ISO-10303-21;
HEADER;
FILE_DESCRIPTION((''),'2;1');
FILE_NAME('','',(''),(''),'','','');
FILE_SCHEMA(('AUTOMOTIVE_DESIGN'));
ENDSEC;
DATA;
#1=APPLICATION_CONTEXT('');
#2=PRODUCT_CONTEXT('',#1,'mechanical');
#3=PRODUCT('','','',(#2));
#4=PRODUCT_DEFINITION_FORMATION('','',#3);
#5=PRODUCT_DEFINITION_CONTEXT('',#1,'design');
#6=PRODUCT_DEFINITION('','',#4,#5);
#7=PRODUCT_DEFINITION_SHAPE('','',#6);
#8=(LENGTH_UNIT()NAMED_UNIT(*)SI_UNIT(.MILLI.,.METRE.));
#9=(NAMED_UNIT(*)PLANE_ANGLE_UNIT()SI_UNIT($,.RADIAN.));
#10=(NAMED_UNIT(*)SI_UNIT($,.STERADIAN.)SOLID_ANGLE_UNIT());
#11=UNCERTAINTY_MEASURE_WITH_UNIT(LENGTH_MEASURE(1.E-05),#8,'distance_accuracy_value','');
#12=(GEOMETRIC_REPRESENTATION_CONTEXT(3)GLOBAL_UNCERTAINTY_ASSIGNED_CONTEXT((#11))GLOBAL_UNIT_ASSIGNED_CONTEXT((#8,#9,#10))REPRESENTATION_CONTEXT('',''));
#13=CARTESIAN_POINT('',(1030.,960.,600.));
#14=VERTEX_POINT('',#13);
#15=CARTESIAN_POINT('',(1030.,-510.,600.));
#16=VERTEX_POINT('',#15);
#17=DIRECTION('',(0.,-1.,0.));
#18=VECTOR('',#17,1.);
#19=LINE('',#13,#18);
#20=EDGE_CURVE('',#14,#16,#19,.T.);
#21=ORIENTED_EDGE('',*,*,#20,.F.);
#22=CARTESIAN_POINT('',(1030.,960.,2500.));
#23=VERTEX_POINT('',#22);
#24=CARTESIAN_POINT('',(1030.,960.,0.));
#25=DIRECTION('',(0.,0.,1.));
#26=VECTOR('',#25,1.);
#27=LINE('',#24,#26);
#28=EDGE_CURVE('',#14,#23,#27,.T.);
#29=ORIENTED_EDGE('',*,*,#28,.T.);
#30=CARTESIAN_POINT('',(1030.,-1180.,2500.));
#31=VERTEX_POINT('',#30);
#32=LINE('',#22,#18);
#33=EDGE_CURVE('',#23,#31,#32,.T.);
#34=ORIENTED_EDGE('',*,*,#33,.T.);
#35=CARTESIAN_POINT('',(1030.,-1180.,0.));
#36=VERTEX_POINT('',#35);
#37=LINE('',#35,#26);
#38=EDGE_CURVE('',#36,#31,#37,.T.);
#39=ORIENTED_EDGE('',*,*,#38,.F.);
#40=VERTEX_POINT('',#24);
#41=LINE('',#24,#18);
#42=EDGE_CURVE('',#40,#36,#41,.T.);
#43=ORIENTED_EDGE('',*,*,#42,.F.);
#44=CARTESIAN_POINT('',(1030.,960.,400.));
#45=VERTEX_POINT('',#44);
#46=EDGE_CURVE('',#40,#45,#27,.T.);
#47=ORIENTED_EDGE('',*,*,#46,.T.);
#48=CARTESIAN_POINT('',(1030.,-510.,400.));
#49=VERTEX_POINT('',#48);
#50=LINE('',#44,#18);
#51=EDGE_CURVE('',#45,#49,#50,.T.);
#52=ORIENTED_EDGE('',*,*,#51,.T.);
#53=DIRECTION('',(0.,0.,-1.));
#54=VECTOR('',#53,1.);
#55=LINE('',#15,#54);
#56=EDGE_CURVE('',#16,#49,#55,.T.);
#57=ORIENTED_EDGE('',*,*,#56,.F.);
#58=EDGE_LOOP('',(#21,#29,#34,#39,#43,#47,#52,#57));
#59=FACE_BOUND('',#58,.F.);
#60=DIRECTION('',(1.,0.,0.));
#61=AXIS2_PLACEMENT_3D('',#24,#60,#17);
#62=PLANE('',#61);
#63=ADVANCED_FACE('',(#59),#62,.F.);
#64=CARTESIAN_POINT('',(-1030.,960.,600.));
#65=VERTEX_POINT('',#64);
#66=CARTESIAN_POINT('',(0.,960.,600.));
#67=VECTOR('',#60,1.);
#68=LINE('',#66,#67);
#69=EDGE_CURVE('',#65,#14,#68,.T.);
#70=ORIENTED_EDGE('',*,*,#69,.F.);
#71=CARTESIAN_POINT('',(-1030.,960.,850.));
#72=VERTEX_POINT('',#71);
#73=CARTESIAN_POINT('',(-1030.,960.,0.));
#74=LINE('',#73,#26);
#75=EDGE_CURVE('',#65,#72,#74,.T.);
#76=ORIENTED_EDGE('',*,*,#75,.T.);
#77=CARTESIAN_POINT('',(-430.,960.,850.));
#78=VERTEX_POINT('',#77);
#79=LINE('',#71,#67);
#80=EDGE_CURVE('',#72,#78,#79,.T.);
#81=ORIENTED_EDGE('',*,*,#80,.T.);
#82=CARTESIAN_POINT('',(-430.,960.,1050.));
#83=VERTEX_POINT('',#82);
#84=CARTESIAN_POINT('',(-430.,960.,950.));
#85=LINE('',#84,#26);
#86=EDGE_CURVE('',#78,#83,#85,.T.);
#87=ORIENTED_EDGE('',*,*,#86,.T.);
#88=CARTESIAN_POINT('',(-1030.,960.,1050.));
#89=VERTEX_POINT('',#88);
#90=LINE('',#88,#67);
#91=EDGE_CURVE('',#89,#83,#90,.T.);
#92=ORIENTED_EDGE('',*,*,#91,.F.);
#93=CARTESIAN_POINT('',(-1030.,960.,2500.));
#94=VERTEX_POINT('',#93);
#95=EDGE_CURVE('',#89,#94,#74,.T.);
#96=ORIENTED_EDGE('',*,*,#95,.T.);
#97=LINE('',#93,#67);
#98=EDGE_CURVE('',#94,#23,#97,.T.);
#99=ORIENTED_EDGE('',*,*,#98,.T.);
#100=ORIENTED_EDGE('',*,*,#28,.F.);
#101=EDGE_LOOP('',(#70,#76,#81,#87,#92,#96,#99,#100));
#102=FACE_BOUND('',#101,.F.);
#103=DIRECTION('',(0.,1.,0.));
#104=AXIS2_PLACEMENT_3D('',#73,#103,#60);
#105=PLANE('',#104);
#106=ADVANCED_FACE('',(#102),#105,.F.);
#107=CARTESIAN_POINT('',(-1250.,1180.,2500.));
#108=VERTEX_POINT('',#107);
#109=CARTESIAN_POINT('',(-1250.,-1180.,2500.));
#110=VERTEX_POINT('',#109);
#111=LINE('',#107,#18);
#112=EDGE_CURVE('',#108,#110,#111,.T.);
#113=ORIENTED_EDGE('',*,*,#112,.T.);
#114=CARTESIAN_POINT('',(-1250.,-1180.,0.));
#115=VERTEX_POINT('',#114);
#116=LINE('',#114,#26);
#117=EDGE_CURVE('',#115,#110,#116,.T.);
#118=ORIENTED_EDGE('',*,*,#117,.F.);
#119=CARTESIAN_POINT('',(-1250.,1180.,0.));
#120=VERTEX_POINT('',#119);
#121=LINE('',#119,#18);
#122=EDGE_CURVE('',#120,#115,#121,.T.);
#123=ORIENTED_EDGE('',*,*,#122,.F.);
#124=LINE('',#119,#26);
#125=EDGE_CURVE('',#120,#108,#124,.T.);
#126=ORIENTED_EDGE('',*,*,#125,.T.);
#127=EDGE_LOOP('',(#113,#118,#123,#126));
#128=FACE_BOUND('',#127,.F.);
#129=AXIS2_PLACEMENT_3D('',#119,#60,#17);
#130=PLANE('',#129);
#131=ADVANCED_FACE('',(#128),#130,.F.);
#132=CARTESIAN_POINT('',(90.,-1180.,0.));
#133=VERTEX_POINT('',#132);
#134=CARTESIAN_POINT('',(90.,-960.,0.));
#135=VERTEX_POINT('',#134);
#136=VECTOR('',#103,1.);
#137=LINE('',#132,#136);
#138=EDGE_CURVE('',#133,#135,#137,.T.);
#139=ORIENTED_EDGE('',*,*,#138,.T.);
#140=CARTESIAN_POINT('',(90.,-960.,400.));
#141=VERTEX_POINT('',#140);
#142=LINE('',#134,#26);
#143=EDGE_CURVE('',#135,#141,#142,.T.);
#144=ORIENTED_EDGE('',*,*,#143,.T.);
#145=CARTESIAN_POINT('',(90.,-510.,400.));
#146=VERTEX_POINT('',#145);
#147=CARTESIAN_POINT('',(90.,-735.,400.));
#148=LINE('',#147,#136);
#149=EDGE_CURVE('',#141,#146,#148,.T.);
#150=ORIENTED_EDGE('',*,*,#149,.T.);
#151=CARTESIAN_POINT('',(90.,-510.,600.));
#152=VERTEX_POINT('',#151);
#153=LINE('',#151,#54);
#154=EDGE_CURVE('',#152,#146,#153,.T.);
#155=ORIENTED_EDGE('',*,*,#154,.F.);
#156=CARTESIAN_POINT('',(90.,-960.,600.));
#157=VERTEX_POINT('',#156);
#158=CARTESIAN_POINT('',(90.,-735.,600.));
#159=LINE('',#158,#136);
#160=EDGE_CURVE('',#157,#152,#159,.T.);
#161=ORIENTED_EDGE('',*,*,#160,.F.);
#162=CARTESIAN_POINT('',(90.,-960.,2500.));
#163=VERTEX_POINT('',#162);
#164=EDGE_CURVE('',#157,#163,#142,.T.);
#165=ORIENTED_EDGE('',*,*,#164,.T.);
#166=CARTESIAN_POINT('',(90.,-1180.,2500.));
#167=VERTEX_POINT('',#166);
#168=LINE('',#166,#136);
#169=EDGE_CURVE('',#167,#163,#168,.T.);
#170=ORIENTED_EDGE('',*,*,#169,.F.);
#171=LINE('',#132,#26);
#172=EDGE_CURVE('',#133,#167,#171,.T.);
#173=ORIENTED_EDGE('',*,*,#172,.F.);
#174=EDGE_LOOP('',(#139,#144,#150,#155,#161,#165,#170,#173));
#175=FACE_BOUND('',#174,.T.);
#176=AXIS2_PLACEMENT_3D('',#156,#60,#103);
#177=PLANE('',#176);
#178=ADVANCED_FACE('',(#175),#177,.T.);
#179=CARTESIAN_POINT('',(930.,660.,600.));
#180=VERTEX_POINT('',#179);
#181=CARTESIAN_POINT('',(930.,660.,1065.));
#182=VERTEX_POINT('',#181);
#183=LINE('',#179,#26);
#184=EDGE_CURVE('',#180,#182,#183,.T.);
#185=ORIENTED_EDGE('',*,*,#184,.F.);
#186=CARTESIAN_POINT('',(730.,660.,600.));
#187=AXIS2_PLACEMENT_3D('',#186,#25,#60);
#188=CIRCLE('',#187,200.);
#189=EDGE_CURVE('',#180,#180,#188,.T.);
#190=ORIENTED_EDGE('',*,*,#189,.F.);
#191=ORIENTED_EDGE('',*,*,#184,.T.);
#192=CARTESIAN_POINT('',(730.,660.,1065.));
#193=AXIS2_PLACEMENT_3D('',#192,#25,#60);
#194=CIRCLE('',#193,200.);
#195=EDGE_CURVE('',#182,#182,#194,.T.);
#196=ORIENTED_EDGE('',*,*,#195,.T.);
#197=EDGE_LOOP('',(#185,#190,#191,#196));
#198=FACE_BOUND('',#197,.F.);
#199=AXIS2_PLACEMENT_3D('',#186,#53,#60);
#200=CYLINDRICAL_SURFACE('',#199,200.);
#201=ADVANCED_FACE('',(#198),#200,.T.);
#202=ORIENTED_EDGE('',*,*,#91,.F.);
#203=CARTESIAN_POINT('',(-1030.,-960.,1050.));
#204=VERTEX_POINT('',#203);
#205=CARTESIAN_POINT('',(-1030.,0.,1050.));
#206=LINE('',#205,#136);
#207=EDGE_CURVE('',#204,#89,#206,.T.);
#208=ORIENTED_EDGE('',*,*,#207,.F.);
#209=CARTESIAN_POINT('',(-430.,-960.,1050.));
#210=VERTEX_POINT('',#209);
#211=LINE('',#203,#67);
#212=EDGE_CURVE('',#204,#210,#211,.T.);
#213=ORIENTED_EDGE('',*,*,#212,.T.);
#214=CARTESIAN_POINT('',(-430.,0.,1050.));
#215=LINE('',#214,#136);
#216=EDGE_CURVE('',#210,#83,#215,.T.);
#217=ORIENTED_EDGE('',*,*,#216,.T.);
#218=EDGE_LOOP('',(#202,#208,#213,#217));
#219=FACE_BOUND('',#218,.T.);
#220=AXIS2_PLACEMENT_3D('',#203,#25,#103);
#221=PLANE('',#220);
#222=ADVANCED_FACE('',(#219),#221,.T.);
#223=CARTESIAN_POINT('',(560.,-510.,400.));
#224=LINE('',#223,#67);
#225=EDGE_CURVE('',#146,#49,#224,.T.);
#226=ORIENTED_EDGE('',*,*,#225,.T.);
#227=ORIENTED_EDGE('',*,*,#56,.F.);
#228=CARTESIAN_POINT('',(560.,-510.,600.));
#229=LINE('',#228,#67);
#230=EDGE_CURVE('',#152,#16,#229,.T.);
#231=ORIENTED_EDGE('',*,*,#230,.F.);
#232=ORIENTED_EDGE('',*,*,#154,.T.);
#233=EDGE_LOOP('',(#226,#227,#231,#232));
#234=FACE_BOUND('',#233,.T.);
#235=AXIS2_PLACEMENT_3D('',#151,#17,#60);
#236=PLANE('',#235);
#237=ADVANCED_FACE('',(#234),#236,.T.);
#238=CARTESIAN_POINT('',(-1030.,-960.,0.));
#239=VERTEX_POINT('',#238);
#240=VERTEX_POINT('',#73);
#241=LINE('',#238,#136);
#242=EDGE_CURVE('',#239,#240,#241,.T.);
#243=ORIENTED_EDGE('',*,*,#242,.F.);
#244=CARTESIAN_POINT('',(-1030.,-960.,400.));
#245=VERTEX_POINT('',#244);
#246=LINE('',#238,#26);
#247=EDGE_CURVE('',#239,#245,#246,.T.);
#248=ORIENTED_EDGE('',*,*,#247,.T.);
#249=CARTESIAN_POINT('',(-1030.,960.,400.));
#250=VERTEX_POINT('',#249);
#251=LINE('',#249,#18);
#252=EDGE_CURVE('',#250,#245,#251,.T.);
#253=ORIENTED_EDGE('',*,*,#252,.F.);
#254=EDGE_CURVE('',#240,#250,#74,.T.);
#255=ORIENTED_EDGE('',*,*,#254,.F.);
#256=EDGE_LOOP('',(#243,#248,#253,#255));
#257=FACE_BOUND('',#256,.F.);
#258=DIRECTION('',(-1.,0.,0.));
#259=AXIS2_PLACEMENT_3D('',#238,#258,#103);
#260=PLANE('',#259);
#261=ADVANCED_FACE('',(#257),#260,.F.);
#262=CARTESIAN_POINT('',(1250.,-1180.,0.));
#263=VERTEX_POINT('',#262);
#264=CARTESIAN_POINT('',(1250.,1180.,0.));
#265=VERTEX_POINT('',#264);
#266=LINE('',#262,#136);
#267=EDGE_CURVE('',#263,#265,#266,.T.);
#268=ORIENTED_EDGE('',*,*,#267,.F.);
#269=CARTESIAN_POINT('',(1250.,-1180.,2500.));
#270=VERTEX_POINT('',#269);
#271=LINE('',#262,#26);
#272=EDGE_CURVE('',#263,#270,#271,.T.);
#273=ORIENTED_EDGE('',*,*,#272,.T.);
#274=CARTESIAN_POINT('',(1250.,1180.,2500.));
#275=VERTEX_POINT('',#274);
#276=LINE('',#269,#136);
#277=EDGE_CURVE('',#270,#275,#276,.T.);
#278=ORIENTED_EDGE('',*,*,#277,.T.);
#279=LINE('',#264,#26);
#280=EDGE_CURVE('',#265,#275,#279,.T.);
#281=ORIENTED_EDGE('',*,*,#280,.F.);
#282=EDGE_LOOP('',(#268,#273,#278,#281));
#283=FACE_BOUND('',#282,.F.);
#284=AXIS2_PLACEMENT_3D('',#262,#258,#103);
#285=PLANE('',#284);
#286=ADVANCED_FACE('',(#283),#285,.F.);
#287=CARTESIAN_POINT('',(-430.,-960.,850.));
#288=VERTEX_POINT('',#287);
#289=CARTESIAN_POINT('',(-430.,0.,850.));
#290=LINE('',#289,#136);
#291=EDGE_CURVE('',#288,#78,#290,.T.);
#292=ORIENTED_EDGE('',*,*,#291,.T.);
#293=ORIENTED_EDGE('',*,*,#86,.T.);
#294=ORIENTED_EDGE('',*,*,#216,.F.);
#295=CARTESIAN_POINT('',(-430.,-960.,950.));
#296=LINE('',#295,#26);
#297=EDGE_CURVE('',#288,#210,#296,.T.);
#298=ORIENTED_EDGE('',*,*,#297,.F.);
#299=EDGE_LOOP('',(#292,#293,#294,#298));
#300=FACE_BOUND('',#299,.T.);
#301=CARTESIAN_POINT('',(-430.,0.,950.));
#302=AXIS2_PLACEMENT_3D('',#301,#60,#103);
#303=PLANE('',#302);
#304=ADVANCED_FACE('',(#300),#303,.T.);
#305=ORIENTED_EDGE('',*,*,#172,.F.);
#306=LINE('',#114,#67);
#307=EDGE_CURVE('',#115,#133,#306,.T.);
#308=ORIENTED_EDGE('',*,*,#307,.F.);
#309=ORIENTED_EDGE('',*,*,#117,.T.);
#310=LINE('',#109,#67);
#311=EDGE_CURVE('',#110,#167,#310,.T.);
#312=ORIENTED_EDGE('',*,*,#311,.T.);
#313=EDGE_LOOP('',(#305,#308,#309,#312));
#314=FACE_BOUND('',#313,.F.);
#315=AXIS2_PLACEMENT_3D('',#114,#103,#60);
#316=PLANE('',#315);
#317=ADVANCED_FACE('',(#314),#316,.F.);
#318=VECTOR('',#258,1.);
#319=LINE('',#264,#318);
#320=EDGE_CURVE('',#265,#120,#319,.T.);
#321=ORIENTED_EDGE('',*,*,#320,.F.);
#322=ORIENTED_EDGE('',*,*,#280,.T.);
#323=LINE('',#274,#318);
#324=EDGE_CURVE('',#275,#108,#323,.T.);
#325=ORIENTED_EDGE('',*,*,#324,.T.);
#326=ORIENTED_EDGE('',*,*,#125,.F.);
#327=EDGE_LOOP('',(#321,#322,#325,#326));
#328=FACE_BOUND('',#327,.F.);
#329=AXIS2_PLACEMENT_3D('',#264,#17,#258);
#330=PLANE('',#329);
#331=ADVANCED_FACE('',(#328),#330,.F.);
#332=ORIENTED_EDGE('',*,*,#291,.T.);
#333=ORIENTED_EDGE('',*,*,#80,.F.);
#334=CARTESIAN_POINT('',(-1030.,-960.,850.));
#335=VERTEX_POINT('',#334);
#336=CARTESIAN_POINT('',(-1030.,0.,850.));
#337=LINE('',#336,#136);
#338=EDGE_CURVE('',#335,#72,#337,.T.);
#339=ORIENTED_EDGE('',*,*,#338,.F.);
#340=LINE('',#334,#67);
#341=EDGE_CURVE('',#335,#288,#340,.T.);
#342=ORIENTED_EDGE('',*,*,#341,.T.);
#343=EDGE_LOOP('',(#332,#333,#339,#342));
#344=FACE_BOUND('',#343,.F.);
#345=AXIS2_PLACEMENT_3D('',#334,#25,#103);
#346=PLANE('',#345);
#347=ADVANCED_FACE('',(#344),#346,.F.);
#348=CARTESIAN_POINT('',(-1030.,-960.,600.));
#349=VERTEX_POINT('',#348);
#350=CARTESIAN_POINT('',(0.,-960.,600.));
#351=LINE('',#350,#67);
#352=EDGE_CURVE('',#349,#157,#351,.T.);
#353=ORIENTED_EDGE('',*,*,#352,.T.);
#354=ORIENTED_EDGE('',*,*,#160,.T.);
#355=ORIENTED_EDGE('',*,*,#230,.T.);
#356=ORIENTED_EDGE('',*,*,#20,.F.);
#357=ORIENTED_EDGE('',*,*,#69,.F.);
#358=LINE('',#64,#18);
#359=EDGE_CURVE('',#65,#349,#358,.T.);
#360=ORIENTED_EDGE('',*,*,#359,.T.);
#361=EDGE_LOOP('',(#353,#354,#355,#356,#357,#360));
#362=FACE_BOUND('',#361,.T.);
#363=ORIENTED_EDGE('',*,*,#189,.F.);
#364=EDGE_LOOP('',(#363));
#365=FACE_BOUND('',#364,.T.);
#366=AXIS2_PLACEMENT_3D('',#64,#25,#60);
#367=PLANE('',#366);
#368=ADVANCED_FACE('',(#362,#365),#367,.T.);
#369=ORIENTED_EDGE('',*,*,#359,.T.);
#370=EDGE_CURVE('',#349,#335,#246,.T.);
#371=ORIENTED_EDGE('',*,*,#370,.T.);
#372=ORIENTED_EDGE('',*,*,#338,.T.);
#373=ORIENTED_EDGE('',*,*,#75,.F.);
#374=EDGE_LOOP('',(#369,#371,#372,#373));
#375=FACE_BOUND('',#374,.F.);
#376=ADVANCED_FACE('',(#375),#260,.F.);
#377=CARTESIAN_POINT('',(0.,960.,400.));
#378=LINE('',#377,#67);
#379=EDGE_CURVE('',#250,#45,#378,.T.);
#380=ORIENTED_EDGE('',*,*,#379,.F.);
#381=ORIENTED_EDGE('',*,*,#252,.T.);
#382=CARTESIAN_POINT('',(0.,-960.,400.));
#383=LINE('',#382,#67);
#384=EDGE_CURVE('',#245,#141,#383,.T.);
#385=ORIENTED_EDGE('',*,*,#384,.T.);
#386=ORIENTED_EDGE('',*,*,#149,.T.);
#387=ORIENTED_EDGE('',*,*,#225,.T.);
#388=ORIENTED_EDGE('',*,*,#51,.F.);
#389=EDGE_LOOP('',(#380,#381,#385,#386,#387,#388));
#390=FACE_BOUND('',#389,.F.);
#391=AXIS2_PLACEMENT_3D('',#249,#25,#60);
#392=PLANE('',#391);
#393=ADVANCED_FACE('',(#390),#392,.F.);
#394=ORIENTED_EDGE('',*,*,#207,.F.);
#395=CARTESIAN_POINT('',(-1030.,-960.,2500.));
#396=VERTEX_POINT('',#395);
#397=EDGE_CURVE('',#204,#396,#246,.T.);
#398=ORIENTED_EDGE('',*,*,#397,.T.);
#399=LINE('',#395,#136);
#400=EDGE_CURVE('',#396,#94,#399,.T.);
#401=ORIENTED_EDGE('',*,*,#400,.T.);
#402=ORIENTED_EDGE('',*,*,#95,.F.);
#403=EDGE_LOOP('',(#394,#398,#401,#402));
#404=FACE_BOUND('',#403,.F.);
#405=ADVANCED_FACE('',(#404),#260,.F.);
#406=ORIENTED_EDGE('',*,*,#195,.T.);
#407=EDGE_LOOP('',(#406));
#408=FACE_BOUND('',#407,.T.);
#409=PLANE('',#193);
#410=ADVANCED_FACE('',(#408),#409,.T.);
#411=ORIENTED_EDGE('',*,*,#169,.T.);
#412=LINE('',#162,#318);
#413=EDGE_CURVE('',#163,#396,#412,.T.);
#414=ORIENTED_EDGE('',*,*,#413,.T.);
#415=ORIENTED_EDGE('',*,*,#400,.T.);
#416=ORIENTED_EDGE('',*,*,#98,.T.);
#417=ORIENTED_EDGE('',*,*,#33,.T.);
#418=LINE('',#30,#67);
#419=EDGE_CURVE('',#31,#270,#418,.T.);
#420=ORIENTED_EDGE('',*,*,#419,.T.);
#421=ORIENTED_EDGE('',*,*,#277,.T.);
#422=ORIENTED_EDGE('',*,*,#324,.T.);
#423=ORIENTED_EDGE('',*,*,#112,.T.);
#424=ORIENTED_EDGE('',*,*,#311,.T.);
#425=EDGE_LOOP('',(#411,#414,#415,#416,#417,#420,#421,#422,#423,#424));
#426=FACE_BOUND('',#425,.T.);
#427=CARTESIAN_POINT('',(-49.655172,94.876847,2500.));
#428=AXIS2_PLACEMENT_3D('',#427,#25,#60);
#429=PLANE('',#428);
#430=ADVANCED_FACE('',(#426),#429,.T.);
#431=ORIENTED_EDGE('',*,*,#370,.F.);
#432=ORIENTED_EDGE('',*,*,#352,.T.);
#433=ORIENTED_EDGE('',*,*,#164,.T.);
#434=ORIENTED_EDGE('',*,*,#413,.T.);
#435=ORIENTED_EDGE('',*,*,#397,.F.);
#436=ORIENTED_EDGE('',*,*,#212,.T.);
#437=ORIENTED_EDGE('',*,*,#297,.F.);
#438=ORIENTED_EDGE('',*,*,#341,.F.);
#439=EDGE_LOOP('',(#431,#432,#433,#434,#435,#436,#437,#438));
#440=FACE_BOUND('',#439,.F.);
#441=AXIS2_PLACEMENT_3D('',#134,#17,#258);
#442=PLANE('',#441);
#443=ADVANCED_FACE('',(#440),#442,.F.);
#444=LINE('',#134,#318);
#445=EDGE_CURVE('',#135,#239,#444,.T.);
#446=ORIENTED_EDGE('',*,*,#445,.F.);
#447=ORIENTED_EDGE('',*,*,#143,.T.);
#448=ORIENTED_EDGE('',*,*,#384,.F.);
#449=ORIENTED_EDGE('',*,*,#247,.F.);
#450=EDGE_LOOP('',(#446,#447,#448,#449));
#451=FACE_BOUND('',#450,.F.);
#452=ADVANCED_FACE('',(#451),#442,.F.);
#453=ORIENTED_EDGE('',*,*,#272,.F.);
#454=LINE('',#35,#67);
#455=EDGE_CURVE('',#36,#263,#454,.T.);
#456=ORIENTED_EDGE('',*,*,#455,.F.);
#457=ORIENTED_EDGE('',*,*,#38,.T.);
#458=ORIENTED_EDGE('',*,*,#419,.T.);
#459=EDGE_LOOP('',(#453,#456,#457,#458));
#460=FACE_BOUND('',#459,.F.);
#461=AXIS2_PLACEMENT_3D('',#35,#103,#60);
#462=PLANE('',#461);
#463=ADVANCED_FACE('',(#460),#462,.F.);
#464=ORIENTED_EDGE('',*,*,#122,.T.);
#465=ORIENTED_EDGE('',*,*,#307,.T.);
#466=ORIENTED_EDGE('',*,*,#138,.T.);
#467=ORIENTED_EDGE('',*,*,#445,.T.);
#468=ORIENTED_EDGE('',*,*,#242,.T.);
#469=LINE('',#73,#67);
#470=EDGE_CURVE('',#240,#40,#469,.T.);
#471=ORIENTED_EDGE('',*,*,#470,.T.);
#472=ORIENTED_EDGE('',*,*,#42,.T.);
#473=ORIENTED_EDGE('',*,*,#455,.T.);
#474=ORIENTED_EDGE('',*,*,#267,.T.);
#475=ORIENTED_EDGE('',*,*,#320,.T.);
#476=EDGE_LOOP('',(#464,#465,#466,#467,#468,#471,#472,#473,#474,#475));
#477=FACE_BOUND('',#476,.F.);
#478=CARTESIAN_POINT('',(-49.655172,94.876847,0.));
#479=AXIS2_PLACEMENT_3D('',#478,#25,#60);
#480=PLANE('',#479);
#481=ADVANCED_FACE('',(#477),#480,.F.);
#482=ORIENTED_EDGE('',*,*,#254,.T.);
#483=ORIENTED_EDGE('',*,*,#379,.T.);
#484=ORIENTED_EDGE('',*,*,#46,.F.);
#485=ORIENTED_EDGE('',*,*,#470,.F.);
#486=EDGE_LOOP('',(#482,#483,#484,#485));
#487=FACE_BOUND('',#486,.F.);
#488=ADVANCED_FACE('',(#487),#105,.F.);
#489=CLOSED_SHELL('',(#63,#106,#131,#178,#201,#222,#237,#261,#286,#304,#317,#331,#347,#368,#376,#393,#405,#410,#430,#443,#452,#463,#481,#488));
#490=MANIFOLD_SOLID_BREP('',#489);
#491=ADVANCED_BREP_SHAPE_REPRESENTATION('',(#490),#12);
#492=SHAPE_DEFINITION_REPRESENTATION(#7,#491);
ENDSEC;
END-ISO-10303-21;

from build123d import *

# Parameters (mm, degrees)
F1_DEPTH = 2500
F2_W     = 2060
F2_H     = 200
F3_DEPTH = 1920
F4_W     = 1920
F4_H     = 200
F5_DEPTH = 600
F6_R     = 200
F7_DEPTH = 465
F8_W     = 940
F8_H     = 450
F9_DEPTH = 200


# Not quite as in the source:
# - the program builds the solid bodies; features that only make, move or delete a surface that nothing else refers to are left out


with BuildPart() as f1:
    # F0 (on Top) → F1 (new body)
    with BuildSketch(Plane.XY):
        Polygon((-1030, 960), (1030, 960), (1030, -960), (1030, -1180), (1250, -1180), (1250, 1180), (-1250, 1180), (-1250, -1180), (90, -1180), (90, -960), (-1030, -960), align=None)
    extrude(amount=F1_DEPTH)

    # F2 (on face) → F3 (join)
    with BuildSketch(Plane.XZ.offset(-960)):
        with Locations((0, 500)):
            Rectangle(F2_W, F2_H)
    extrude(amount=F3_DEPTH)

    # F4 (on face) → F5 (join)
    with BuildSketch(Plane.YZ.offset(-1030)):
        with Locations((0, 950)):
            Rectangle(F4_W, F4_H)
    extrude(amount=F5_DEPTH)

    # F6 (on face) → F7 (join)
    with BuildSketch(Plane.XY.offset(600)):
        with Locations((730, 660)):
            Circle(F6_R)
    extrude(amount=F7_DEPTH)

    # F8 (on face) → F9 (cut, through all)
    with BuildSketch(Plane.XY.offset(600)):
        with Locations((560, -735)):
            Rectangle(F8_W, F8_H)
    extrude(amount=-F9_DEPTH, mode=Mode.SUBTRACT)


solid = f1.part
